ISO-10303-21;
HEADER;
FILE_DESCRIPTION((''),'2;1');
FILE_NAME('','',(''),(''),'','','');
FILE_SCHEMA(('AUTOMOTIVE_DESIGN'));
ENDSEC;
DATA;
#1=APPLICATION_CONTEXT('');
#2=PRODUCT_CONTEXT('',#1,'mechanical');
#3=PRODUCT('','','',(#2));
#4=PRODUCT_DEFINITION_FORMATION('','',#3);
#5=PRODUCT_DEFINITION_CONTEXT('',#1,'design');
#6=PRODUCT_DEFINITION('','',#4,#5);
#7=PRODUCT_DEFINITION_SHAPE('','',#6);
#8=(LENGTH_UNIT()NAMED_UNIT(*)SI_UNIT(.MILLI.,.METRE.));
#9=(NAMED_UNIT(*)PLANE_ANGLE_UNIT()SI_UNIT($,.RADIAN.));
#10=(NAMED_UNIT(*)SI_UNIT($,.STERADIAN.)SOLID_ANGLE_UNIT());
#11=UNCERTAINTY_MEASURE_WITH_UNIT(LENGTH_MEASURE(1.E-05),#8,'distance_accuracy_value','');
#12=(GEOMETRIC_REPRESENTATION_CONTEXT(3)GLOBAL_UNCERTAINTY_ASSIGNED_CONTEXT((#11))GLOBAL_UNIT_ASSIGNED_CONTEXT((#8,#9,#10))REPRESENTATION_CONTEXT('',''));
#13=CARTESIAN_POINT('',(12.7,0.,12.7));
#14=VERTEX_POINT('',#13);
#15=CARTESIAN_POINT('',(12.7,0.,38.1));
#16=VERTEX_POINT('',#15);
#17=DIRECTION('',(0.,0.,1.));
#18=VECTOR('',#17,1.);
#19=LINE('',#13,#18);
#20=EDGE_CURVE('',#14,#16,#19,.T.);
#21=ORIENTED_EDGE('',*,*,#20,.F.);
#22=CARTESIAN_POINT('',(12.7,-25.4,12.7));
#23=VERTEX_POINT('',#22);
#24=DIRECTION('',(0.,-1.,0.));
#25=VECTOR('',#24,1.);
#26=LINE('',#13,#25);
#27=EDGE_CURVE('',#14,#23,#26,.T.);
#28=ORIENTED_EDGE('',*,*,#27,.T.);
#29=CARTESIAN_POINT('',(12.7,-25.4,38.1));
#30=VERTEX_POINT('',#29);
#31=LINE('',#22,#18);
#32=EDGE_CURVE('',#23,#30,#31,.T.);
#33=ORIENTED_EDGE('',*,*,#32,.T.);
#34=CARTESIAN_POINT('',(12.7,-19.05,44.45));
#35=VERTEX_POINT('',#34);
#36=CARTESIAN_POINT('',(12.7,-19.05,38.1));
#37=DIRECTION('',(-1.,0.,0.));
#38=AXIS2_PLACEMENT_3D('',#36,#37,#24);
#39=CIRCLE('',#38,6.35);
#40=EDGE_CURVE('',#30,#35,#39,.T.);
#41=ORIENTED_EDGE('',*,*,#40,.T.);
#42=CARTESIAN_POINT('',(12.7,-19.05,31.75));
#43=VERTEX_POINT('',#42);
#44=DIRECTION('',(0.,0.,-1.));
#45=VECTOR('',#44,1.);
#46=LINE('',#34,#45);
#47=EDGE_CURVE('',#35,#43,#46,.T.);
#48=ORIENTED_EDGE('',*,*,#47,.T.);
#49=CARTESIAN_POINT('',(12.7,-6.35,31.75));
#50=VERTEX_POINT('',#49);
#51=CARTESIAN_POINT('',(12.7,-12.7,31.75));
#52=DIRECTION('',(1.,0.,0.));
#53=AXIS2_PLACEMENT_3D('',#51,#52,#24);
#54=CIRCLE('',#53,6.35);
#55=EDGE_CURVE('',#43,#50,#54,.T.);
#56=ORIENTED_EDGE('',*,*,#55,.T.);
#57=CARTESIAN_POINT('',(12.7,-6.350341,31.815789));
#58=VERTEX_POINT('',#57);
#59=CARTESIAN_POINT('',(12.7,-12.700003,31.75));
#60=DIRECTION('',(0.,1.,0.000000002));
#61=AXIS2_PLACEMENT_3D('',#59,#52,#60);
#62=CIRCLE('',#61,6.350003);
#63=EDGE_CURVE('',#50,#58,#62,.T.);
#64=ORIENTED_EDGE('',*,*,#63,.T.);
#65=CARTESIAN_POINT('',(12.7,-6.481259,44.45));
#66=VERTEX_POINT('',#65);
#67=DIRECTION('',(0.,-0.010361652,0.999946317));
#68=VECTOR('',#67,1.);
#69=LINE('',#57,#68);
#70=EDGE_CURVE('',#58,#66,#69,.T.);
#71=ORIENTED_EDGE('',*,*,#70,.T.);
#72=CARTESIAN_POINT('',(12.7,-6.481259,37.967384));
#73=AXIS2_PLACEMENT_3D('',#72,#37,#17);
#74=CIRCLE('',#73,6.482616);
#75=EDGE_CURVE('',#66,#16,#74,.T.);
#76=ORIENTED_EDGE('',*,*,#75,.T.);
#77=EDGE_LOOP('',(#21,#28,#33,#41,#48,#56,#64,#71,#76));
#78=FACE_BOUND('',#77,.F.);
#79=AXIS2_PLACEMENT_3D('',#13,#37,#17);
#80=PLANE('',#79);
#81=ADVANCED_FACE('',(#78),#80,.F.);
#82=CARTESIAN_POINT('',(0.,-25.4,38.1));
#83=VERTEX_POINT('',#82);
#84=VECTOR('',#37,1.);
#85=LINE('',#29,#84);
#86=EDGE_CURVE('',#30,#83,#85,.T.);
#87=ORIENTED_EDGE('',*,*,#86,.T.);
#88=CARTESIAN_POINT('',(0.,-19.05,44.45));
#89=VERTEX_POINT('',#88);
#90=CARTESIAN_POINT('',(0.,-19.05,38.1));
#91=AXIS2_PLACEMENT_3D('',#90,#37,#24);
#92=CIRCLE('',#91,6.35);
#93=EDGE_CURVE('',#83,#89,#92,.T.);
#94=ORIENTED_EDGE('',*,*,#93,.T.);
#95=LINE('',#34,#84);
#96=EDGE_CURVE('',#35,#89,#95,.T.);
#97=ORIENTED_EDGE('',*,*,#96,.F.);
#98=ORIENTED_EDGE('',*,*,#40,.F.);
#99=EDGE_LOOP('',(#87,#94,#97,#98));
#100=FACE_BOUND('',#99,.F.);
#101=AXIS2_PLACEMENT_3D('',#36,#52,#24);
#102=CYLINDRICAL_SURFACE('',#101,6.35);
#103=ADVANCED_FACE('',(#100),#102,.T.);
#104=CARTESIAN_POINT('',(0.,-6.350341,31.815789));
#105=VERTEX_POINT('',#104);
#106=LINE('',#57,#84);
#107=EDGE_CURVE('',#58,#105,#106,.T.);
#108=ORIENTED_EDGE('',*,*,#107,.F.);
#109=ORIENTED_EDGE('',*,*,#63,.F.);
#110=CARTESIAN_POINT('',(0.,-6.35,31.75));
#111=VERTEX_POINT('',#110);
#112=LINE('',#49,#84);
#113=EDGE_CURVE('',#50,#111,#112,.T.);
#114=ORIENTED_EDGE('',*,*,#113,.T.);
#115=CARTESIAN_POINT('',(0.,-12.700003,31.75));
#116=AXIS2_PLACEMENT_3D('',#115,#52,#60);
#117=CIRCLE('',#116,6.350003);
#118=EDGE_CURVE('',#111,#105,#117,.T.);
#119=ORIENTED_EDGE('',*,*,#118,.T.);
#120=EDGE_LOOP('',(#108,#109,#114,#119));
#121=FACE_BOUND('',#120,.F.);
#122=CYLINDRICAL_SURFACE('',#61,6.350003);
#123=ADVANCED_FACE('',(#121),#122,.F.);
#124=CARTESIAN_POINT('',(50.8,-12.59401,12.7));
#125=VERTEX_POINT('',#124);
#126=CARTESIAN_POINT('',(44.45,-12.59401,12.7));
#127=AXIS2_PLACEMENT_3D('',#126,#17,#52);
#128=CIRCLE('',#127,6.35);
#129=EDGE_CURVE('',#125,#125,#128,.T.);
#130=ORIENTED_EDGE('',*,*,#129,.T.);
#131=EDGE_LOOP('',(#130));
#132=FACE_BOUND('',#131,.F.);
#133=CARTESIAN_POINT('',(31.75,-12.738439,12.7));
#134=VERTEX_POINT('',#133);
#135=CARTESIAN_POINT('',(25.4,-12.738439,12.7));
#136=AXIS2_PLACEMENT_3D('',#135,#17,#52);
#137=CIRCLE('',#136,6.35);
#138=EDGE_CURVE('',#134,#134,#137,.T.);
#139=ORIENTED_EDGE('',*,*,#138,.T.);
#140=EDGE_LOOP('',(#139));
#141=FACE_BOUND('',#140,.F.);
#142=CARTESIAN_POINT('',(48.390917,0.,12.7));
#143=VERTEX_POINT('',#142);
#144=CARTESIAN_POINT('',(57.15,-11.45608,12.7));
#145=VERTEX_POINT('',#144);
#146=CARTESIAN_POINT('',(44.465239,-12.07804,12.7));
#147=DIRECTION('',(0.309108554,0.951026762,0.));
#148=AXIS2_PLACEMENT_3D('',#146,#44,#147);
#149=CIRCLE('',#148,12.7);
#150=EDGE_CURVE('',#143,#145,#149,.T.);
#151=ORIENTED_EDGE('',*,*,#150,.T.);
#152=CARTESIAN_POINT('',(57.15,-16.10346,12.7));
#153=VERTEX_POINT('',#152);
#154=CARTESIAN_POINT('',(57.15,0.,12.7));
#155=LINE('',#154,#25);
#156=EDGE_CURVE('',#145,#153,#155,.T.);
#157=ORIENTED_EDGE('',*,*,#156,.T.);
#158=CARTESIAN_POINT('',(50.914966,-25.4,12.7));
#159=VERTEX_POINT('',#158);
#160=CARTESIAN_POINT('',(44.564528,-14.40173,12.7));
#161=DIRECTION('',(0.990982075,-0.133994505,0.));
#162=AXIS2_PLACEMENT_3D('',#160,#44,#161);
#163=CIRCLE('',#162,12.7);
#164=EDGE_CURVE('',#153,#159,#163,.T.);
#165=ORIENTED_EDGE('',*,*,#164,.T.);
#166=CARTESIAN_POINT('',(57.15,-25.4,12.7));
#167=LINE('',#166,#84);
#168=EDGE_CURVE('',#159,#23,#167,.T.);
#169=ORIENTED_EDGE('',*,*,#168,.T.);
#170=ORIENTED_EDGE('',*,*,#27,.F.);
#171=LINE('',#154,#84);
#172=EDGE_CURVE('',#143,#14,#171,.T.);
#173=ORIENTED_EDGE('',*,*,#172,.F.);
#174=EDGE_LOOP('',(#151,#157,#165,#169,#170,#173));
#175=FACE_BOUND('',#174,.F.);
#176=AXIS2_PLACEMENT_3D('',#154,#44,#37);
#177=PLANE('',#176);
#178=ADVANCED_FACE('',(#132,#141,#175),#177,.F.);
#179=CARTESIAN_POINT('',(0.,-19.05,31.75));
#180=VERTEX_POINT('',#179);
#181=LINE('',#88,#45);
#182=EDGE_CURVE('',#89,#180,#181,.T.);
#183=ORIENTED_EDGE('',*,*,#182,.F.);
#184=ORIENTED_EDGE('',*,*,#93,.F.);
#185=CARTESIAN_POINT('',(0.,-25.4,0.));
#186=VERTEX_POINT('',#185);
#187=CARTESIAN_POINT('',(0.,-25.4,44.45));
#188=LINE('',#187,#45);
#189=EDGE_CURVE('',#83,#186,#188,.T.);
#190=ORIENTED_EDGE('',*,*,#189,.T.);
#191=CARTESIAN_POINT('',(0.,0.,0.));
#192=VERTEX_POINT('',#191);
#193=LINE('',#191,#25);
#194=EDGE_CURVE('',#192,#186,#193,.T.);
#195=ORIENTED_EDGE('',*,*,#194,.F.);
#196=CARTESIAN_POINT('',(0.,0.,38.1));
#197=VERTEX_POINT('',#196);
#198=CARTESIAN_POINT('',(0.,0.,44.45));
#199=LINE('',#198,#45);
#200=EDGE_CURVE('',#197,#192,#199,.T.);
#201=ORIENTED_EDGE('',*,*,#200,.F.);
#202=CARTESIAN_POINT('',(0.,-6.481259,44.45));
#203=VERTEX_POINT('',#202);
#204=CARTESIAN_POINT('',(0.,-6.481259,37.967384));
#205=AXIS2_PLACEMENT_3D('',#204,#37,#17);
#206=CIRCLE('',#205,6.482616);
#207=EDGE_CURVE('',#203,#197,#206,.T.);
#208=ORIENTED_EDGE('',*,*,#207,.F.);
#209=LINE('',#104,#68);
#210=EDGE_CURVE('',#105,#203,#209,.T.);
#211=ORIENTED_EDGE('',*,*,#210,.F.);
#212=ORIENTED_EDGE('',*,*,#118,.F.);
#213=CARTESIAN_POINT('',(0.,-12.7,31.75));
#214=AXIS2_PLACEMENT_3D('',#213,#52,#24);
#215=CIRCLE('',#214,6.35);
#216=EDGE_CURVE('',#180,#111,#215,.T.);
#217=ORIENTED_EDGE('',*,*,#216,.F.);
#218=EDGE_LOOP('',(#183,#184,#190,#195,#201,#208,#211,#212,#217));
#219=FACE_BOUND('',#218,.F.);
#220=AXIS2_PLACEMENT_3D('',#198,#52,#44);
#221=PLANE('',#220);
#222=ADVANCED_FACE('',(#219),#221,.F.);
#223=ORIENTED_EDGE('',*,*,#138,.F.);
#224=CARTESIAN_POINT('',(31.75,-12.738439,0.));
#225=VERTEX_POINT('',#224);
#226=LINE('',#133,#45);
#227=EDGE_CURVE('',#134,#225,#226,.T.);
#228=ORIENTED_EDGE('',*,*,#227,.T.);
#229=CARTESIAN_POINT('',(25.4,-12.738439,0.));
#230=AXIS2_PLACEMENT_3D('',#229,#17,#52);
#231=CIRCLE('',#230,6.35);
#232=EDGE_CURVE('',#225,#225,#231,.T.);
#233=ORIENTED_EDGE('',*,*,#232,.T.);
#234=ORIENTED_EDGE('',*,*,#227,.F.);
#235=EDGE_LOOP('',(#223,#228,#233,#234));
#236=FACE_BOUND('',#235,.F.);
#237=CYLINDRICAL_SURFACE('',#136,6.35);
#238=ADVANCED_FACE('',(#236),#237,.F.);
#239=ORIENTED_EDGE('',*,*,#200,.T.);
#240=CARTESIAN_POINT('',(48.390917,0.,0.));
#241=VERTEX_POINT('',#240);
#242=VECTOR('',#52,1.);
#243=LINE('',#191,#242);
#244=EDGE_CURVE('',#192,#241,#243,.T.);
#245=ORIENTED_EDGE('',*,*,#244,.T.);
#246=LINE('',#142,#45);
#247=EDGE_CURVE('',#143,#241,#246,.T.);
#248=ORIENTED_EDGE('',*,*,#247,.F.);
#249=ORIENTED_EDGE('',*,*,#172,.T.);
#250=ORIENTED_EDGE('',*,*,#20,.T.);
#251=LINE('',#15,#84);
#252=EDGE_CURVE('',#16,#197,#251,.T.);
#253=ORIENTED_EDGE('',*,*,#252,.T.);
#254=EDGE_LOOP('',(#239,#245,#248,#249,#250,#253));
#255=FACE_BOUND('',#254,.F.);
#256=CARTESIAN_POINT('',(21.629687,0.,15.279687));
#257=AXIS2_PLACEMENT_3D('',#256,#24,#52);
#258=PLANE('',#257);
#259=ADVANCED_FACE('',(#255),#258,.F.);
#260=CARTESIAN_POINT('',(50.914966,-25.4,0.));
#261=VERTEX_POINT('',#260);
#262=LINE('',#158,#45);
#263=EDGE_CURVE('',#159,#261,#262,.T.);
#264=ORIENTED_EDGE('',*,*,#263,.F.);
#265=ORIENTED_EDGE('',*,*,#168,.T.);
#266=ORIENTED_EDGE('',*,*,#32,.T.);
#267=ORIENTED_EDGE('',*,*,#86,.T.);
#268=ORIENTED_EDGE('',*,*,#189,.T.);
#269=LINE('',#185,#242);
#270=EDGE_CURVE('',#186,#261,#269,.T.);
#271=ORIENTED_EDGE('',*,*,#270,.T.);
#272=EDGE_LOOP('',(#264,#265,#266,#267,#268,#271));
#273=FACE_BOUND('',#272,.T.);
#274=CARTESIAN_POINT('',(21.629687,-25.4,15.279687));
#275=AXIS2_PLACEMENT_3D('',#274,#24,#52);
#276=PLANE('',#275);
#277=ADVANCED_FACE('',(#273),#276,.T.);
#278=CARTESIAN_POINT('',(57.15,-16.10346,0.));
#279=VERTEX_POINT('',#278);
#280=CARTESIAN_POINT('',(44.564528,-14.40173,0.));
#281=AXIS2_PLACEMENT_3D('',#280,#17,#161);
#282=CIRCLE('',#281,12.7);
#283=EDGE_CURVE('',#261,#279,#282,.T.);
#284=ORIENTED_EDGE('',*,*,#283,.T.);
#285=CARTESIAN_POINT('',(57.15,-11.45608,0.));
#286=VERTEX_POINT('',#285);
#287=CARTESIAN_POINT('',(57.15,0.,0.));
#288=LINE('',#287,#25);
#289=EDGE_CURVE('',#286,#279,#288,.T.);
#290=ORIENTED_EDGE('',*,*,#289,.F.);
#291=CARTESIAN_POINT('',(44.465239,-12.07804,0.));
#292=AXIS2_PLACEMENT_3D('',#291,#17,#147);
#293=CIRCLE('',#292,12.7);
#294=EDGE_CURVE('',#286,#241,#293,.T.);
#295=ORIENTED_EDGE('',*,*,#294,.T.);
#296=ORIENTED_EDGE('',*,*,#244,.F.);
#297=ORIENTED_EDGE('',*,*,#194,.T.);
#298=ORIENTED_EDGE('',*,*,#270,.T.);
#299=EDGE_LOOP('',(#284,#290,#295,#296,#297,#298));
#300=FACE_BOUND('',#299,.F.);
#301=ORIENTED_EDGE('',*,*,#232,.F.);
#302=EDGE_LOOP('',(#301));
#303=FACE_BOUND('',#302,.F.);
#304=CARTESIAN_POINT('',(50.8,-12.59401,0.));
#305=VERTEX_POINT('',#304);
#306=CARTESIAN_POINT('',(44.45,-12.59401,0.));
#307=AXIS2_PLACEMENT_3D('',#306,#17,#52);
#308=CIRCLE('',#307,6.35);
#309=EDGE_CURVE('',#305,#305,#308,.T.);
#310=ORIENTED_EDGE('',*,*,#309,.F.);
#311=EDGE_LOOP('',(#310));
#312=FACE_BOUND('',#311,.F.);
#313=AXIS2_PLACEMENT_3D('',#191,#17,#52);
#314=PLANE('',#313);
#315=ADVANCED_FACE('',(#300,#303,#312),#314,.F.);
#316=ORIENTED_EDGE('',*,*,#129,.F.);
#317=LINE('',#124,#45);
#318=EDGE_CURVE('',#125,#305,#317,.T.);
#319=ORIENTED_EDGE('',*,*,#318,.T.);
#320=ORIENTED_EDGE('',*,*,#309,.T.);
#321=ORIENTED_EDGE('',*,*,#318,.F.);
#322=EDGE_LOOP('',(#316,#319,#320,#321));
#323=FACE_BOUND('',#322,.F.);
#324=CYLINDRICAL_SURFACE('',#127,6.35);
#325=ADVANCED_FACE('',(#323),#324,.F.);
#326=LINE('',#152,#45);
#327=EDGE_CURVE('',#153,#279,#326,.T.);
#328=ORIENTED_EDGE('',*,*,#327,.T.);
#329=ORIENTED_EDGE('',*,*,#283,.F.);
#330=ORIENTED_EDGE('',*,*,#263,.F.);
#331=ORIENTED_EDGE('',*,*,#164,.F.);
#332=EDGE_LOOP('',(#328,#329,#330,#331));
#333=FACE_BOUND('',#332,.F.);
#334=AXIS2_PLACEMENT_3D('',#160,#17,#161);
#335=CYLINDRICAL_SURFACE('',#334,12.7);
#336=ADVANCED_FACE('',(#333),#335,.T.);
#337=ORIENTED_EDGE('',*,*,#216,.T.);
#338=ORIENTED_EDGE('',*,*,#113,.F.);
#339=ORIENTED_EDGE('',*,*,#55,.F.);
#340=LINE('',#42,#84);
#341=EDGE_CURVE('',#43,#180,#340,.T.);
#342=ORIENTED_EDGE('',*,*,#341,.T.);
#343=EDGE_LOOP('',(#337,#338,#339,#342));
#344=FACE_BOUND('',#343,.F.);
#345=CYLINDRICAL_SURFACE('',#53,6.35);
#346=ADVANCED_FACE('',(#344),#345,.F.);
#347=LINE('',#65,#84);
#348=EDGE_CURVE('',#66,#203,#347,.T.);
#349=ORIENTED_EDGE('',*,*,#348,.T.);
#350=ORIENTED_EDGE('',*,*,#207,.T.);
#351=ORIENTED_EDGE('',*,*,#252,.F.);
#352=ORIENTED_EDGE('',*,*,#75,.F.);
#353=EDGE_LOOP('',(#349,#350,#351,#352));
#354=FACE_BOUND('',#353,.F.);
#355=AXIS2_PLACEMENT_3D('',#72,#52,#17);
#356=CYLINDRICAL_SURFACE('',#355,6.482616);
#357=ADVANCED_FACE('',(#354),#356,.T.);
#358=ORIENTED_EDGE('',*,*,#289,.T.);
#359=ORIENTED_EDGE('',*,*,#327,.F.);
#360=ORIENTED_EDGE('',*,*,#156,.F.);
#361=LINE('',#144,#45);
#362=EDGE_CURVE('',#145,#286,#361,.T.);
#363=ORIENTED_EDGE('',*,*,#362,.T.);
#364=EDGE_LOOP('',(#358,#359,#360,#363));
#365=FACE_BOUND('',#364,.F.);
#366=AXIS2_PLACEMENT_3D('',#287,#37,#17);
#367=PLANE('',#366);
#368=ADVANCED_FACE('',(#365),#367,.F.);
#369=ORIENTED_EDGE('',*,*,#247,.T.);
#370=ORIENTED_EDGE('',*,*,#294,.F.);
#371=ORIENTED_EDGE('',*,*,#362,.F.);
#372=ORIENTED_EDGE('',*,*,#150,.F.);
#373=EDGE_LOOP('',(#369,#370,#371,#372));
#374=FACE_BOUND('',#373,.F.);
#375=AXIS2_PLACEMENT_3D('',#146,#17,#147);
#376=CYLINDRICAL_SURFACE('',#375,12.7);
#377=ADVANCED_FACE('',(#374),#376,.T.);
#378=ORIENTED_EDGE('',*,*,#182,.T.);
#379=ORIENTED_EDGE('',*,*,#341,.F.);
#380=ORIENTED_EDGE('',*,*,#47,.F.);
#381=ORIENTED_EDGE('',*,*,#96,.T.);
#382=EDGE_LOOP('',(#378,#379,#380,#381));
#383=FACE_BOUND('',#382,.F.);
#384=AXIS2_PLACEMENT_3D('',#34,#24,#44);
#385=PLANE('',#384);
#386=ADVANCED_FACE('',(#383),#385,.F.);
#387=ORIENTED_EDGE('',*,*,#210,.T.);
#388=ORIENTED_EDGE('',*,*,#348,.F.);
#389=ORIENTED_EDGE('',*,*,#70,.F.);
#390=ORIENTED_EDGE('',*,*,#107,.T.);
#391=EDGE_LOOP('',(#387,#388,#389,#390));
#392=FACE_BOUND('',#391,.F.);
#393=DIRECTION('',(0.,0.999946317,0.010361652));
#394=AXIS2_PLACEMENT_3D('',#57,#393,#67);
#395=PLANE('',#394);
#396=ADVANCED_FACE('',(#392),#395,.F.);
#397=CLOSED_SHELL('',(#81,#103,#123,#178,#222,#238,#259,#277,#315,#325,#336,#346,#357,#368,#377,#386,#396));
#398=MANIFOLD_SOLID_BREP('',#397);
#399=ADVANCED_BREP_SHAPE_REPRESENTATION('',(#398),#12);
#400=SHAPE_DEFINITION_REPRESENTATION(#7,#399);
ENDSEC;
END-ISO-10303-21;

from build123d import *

# Parameters (mm, degrees)
F1_DEPTH = 25.4
F3_DEPTH = 12.7
F4_R     = 6.35
F5_DEPTH = 25.4


# Not quite as in the source:
# - ends of sketch curves that miss each other by under 0.0002 mm in the source are joined


with BuildPart() as f1:
    # F0 (on Front) → F1 (new body)
    with BuildSketch(Plane.XZ):
        Polygon((0, 44.45), (0, 0), (57.15, 0), (57.15, 12.7), (12.7, 12.7), (12.7, 44.45), align=None)
    extrude(amount=F1_DEPTH)

    # F2 (on face) → F3 (cut)
    with BuildSketch(Plane.YZ.offset(12.7)):
        with BuildLine():
            Line((-12.7, 31.75), (-19.05, 31.75))
            ThreePointArc((-19.05, 31.75), (-12.7, 25.4), (-6.35, 31.75))
            Line((-6.35, 31.75), (-12.7, 31.75))
        make_face()
        with BuildLine():
            Line((-19.05, 44.45), (-19.05, 31.75))
            ThreePointArc((-19.05, 31.75), (-12.732894977, 38.0999147963), (-6.3503408124, 31.8157890712))
            Line((-6.3503408124, 31.8157890712), (-6.4812591328, 44.45))
            Line((-6.4812591328, 44.45), (-19.05, 44.45))
        make_face()
        with BuildLine():
            ThreePointArc((-6.3503408124, 31.8157890712), (-12.732894977, 38.0999147963), (-19.05, 31.75))
            Line((-19.05, 31.75), (-12.7, 31.75))
            Line((-12.7, 31.75), (-6.35, 31.75))
            ThreePointArc((-6.35, 31.75), (-6.3500852037, 31.782894977), (-6.3503408124, 31.8157890712))
        make_face()
        with BuildLine():
            ThreePointArc((-25.4, 38.1), (-23.5401280605, 42.5901280605), (-19.05, 44.45))
            Line((-19.05, 44.45), (-25.4, 44.45))
            Line((-25.4, 44.45), (-25.4, 38.1))
        make_face()
        with BuildLine():
            Line((0, 44.45), (-6.4812591328, 44.45))
            ThreePointArc((-6.4812591328, 44.45), (-1.9444866031, 42.597935184), (0, 38.1))
            Line((0, 38.1), (0, 44.45))
        make_face()
    extrude(amount=-F3_DEPTH, mode=Mode.SUBTRACT)

    # F4 (on face) → F5 (cut)
    with BuildSketch(Plane.XY.offset(12.7)):
        with Locations((25.4, -12.7384394317)):
            Circle(F4_R)
        with Locations((44.45, -12.5940097496)):
            Circle(F4_R)
        with BuildLine():
            ThreePointArc((48.39091748, 0), (54.5541990648, -4.3642287783), (57.15, -11.4560797516))
            Line((57.15, -11.4560797516), (57.15, 0))
            Line((57.15, 0), (48.39091748, 0))
        make_face()
        with BuildLine():
            Line((57.15, -25.4), (57.15, -16.1034604334))
            ThreePointArc((57.15, -16.1034604334), (55.1119721944, -21.4757258052), (50.91496557, -25.4))
            Line((50.91496557, -25.4), (57.15, -25.4))
        make_face()
    extrude(amount=-F5_DEPTH, mode=Mode.SUBTRACT)


solid = f1.part
